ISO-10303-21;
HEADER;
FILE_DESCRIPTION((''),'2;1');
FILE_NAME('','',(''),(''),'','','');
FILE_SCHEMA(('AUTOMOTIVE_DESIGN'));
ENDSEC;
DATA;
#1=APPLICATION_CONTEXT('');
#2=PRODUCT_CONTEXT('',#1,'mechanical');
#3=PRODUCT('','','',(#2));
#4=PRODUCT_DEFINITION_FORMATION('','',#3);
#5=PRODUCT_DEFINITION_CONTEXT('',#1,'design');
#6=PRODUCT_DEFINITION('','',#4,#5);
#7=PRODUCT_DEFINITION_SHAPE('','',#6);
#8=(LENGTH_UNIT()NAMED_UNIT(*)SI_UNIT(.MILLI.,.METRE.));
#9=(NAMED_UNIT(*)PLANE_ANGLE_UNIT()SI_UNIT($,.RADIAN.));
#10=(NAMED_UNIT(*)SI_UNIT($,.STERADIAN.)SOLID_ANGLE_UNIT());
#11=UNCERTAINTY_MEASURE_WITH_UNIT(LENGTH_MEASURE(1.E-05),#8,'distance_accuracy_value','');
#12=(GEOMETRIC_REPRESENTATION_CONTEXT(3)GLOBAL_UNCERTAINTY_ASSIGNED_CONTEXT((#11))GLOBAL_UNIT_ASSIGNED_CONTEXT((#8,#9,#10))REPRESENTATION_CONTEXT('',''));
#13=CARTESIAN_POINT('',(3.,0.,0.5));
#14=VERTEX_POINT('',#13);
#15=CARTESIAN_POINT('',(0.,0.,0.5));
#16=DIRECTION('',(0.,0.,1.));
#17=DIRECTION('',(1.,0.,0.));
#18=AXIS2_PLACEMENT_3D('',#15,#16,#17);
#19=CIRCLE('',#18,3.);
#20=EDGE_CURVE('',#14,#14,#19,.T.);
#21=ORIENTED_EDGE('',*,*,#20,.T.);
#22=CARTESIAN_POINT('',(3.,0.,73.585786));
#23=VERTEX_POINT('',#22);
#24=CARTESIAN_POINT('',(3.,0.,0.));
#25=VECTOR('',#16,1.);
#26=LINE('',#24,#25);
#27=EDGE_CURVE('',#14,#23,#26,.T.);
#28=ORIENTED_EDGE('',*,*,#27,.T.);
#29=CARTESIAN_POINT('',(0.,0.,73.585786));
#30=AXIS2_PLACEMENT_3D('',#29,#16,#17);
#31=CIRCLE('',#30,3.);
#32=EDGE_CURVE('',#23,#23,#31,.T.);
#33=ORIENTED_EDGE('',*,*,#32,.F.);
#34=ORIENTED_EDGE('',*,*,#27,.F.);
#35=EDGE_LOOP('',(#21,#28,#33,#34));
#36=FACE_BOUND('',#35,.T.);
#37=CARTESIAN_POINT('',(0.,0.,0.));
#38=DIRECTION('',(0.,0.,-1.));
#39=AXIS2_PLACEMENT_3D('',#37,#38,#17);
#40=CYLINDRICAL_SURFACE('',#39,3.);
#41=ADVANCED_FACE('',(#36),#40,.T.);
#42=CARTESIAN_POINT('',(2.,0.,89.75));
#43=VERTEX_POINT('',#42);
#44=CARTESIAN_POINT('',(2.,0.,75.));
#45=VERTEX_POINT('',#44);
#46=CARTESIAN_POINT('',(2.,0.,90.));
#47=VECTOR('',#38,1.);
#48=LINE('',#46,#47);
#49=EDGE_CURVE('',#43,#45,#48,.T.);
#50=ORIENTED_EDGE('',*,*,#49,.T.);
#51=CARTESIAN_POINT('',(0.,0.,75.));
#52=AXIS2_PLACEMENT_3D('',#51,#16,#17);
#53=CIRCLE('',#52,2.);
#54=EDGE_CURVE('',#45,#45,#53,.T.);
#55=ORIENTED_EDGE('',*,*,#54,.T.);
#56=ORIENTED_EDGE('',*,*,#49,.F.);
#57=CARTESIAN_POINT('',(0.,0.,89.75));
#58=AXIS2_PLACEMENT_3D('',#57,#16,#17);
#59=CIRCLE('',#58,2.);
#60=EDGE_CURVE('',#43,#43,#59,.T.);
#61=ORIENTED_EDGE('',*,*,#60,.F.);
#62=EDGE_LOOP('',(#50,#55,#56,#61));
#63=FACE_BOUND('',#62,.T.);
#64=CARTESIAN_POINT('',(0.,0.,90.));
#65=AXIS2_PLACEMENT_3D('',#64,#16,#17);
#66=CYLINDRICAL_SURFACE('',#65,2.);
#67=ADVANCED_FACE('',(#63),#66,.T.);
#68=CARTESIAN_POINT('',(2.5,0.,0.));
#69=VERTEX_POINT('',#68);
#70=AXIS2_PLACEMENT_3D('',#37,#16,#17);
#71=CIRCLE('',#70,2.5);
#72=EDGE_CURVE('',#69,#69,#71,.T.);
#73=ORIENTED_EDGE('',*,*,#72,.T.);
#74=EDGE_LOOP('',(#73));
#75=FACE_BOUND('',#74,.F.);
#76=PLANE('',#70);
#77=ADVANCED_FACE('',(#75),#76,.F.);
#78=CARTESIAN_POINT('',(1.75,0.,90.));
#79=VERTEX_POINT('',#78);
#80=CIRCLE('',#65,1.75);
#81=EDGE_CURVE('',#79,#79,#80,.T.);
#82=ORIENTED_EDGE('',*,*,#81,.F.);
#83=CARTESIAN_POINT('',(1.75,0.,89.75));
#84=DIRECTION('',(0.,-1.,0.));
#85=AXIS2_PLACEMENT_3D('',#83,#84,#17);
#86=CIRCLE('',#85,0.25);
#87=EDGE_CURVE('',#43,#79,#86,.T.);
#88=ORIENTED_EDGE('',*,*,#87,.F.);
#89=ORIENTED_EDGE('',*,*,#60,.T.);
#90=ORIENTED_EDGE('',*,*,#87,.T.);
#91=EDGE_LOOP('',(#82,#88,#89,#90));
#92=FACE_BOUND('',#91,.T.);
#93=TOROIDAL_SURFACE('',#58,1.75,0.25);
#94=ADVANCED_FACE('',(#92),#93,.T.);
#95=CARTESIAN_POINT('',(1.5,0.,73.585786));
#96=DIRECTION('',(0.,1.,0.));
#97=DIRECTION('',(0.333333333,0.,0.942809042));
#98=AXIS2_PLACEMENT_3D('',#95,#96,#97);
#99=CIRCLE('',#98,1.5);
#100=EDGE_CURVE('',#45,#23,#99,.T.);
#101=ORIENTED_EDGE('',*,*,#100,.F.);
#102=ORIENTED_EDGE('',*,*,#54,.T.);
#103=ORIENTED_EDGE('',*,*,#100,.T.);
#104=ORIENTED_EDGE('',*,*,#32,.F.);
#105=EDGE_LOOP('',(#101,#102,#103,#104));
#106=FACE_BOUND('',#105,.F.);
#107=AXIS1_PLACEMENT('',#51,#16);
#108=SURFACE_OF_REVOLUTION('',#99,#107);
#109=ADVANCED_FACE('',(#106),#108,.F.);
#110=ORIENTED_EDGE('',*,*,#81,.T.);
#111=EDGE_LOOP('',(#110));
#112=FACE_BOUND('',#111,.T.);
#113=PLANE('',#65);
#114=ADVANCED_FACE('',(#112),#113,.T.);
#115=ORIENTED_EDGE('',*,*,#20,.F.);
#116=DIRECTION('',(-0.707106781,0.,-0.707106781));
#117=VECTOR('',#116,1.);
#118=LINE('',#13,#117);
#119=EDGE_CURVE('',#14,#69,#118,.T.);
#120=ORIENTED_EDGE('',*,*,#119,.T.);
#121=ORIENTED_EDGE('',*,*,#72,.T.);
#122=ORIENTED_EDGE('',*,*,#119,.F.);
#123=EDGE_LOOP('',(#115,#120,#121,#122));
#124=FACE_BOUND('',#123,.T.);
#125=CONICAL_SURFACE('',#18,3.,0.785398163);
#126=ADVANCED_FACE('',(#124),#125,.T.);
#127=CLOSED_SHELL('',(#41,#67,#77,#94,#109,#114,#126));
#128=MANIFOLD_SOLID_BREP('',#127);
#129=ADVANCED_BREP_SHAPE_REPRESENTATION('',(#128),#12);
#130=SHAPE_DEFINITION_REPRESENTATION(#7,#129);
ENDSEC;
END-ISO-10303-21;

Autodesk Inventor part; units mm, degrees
ref_plane "YZ Plane" through (0, 0, 0) normal (1, 0, 0) x (0, 1, 0)
ref_plane "XZ Plane" through (0, 0, 0) normal (0, 1, 0) x (-1, 0, 0)
ref_plane "XY Plane" through (0, 0, 0) normal (0, 0, 1) x (1, 0, 0)
sketch "Sketch1" plane through (0, 0, 0) normal (0, 0, 1) x (1, 0, 0)
  circle A0 centre (0, 0) radius 3
  dimension "d0" = 6
extrude "Extrusion1" add sketch "Sketch1" along normal blind 90
sketch "Sketch2" plane through (0, 0, 90) normal (0, 0, 1) x (1, 0, 0)
  circle A0 centre (0, 0) radius 2
  circle A1 centre (0, 0) radius 3
  dimension "d3" = 4
extrude "Extrusion2" cut sketch "Sketch2" against normal blind 15
thread "Thread1" size "M4x0.7" class "6g" standard "ANSI Metric M Profile" length 10 offset 6
fillet "Fillet1" radius 0.25 1 edges at (-2, 0, 90)
fillet "Fillet2" radius 1.5 1 edges at (-3, 0, 75)
chamfer "Chamfer1" distance 0.5 angle 45 1 edges at (-3, 0, 0)
properties part number "hridel_pro_kola" material "Iron, Cast"
